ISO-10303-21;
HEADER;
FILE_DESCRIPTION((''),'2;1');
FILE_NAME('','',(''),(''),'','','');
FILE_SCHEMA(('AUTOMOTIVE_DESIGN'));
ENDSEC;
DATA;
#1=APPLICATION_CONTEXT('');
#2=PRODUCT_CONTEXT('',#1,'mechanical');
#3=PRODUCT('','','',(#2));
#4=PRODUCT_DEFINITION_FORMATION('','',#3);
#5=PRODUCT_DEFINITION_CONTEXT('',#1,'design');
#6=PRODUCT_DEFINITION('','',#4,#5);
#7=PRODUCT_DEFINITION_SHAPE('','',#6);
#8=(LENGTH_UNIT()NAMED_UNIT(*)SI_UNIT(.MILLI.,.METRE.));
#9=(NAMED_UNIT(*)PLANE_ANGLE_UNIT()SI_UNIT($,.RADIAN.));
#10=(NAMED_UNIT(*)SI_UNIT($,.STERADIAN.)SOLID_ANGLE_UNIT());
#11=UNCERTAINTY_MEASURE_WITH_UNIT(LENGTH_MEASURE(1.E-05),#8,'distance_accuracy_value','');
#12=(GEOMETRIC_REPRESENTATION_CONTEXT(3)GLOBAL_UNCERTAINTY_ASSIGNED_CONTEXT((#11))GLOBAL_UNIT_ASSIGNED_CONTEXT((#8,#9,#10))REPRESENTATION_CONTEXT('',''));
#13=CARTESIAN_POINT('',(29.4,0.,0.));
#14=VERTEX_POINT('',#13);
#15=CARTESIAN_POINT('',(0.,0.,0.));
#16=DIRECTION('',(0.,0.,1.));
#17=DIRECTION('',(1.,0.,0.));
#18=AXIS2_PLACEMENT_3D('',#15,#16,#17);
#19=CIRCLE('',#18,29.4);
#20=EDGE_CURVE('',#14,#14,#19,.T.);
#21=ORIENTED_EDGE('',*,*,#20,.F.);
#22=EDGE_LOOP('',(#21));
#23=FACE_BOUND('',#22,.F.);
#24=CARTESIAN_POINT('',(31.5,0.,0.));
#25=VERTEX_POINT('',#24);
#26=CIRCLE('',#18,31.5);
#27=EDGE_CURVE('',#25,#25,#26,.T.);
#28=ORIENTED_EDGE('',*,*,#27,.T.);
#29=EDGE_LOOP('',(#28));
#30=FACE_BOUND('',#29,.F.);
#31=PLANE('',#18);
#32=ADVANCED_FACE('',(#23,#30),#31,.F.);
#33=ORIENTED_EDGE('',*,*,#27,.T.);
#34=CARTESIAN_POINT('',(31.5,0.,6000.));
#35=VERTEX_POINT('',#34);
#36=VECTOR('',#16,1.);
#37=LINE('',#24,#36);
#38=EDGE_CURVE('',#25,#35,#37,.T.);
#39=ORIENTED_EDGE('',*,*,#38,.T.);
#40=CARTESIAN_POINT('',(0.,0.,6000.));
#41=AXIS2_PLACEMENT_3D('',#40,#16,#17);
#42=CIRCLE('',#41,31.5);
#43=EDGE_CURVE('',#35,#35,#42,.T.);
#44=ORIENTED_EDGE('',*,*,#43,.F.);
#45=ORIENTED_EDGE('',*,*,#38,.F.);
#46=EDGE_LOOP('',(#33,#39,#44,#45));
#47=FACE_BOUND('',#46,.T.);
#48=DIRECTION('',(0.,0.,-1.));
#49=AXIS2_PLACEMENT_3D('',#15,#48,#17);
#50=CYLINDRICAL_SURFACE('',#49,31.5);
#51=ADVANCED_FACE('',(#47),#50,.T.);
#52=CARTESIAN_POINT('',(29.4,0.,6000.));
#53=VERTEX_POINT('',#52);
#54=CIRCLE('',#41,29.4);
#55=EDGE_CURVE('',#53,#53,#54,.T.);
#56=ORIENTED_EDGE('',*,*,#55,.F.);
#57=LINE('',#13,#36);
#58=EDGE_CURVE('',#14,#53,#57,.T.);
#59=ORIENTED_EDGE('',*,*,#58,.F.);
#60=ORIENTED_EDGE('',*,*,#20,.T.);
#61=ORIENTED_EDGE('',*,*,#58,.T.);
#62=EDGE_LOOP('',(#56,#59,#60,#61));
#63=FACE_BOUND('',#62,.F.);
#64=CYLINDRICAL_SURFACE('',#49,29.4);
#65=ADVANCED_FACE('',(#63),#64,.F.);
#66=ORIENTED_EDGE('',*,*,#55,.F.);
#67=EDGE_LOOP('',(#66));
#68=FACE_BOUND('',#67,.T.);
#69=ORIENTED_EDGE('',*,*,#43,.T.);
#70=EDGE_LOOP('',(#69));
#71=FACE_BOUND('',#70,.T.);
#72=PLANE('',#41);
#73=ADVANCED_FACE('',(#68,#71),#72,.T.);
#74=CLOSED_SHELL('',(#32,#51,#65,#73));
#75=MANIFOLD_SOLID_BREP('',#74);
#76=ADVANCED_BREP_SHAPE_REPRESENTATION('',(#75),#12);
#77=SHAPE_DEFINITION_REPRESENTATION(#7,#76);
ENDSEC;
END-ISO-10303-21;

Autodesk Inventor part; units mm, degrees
ref_plane "YZ Plane" through (0, 0, 0) normal (1, 0, 0) x (0, 1, 0)
ref_plane "XZ Plane" through (0, 0, 0) normal (0, 1, 0) x (-1, 0, 0)
ref_plane "XY Plane" through (0, 0, 0) normal (0, 0, 1) x (1, 0, 0)
sketch "Sketch1" plane through (0, 0, 0) normal (0, 0, 1) x (1, 0, 0)
  circle A0 centre (0, 0) radius 31.5
  circle A1 centre (0, 0) radius 29.4
  dimension "d0" = 63
  dimension "d1" = 2.1
extrude "Extrusion1" add sketch "Sketch1" along normal blind 6000
properties part number "6m_GENERIC_FLAT_mod"
